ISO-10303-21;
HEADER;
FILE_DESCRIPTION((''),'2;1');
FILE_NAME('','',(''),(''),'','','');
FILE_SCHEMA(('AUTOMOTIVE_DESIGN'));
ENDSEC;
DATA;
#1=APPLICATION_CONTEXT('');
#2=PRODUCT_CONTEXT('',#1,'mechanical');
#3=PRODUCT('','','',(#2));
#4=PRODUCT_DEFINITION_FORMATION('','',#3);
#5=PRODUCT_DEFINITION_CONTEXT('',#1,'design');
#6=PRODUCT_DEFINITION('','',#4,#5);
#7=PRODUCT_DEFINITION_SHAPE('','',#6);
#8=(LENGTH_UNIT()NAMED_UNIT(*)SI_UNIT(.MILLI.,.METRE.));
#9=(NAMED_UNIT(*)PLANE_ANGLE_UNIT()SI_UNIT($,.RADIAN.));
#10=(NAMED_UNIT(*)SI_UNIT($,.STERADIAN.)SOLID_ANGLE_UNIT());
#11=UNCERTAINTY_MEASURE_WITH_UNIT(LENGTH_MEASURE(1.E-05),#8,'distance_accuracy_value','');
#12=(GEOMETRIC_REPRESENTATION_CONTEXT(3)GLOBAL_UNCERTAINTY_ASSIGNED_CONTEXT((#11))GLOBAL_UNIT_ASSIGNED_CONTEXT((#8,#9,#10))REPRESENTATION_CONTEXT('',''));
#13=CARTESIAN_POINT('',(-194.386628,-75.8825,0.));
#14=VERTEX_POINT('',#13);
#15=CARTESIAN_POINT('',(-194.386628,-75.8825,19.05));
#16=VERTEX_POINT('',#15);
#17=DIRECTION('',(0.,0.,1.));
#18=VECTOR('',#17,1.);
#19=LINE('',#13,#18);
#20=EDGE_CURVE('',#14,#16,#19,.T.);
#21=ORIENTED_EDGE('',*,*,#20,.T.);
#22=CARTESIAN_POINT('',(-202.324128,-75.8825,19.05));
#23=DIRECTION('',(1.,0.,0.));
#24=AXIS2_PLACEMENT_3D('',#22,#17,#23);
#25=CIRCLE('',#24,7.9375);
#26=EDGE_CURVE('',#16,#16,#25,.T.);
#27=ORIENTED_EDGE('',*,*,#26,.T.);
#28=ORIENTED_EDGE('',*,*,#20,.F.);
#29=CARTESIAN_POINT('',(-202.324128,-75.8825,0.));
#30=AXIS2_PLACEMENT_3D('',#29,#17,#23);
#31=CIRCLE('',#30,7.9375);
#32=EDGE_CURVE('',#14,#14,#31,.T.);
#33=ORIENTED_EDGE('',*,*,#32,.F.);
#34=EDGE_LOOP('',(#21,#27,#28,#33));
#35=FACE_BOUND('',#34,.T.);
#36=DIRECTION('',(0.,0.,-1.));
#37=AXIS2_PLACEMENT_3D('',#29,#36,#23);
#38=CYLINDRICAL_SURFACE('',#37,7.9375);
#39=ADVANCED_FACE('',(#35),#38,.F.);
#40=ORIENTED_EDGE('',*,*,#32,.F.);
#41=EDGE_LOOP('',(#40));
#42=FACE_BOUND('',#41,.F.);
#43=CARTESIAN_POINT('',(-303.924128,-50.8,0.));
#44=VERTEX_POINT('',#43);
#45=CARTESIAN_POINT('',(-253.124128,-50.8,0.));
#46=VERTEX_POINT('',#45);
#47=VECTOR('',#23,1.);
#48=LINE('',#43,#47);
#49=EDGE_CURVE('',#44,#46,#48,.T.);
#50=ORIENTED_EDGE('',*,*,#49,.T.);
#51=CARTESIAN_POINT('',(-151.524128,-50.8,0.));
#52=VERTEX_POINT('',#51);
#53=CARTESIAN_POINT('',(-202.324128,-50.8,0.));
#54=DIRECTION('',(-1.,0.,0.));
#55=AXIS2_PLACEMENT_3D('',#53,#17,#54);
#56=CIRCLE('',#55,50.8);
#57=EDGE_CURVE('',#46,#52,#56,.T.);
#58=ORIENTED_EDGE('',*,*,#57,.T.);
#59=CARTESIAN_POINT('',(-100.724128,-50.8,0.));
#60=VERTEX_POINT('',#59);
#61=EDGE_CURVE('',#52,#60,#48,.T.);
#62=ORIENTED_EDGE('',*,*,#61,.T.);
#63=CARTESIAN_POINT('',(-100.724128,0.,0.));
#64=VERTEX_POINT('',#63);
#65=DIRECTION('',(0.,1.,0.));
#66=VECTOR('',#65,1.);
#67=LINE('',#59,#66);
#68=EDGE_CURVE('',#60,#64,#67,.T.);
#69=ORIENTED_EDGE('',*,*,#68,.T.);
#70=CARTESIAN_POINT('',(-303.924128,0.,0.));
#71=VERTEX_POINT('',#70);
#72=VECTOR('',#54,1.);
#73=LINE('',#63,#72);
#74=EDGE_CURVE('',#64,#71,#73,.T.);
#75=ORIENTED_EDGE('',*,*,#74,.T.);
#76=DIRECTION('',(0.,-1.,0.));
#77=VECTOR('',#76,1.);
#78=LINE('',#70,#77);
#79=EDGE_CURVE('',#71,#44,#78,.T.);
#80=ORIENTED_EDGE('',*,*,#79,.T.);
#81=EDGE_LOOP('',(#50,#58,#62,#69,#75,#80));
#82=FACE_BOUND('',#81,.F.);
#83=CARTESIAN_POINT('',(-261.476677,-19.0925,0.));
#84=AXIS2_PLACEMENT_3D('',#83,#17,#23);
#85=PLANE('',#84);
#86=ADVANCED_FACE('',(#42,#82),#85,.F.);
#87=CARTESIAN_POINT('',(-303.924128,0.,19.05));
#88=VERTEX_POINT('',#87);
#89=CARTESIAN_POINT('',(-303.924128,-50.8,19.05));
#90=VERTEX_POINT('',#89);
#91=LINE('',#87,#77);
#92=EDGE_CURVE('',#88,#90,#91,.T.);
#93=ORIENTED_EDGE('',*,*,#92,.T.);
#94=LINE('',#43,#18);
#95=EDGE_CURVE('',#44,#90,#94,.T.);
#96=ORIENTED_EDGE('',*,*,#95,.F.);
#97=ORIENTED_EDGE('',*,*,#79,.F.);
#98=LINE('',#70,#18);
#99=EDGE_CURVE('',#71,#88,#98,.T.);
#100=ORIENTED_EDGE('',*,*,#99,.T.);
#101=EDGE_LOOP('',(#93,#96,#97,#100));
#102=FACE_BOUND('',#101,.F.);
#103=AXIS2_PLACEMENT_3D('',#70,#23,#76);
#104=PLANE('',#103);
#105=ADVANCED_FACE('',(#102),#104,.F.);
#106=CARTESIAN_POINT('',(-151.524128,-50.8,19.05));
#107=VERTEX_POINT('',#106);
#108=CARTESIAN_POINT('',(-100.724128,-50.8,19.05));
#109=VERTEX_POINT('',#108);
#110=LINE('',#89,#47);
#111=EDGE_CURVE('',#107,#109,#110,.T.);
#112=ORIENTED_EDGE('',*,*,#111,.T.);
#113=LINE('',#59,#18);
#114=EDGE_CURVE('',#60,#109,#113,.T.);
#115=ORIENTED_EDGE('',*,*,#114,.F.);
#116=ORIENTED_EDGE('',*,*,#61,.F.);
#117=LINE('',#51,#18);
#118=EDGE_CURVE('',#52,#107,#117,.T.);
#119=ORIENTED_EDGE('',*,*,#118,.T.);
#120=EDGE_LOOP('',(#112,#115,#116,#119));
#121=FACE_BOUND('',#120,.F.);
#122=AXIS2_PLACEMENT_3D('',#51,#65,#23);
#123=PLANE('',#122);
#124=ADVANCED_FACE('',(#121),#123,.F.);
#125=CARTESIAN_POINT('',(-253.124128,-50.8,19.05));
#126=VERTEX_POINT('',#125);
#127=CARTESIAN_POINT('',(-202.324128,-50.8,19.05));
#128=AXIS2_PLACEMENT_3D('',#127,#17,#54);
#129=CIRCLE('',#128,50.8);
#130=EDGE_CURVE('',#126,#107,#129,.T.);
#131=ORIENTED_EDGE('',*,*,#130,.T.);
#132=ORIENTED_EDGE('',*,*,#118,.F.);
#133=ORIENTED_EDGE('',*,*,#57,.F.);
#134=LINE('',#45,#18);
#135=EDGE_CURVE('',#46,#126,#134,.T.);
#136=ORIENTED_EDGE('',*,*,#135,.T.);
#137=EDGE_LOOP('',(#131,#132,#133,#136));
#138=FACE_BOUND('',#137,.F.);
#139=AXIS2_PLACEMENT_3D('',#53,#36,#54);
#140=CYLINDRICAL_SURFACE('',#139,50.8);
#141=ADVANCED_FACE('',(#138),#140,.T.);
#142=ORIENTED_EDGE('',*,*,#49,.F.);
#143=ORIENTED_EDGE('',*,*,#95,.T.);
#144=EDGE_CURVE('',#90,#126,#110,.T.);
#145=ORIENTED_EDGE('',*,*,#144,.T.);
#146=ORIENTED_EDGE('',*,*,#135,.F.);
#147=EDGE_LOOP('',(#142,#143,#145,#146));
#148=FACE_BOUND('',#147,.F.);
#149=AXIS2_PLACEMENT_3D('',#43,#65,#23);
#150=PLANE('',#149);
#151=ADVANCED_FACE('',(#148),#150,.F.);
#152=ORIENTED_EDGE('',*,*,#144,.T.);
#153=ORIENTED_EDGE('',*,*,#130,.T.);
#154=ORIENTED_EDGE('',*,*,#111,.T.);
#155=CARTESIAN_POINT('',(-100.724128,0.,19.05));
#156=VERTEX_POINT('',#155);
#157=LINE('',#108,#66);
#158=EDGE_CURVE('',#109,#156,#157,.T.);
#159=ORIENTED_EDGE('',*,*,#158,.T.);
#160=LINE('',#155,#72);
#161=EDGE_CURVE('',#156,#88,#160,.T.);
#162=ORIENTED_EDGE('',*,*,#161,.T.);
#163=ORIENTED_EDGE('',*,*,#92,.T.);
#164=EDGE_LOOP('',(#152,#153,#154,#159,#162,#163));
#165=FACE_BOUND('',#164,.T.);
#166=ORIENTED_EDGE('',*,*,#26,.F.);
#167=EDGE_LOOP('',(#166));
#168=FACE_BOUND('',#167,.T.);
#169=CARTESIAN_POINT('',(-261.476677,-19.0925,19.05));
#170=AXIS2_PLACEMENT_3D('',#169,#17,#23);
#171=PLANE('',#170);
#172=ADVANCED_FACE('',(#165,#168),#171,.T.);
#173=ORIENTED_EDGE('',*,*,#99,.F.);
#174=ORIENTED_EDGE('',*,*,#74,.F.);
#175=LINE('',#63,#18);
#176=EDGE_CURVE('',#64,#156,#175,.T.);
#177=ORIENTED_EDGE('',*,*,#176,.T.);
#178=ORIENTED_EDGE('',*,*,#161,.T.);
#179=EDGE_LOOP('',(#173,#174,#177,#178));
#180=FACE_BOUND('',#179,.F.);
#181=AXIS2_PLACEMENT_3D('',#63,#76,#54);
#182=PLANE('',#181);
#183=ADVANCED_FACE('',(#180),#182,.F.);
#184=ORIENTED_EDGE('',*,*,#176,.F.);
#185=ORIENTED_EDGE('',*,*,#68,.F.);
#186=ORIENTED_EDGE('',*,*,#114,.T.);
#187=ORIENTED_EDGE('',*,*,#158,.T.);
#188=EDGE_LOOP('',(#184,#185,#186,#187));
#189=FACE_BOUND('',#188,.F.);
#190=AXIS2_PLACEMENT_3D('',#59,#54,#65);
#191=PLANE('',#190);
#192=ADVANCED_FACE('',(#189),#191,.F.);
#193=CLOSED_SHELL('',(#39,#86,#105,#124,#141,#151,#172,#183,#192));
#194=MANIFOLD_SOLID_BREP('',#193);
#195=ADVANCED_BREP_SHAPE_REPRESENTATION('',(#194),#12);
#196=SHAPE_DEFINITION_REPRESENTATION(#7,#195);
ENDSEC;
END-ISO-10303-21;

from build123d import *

# Parameters (mm, degrees)
F0_R     = 7.9375
F1_DEPTH = 19.05


# Not quite as in the source:
# - a feature of the source that left no trace in its solid (it failed there, or was rolled back) is left out


with BuildPart() as f1:
    # F0 (on Top) → F1 (new body)
    with BuildSketch(Plane.XY):
        with BuildLine():
            ThreePointArc((-253.1241280528, -50.8), (-238.245152537, -14.8789755157), (-202.3241280528, 0))
            Line((-202.3241280528, 0), (-303.9241280528, 0))
            Line((-303.9241280528, 0), (-303.9241280528, -50.8))
            Line((-303.9241280528, -50.8), (-253.1241280528, -50.8))
        make_face()
        with BuildLine():
            ThreePointArc((-151.5241280528, -50.8), (-166.4031035685, -14.8789755157), (-202.3241280528, 0))
            ThreePointArc((-202.3241280528, 0), (-238.245152537, -14.8789755157), (-253.1241280528, -50.8))
            Line((-253.1241280528, -50.8), (-151.5241280528, -50.8))
        make_face()
        with BuildLine():
            Line((-100.7241280528, -50.8), (-100.7241280528, 0))
            Line((-100.7241280528, 0), (-202.3241280528, 0))
            ThreePointArc((-202.3241280528, 0), (-166.4031035685, -14.8789755157), (-151.5241280528, -50.8))
            Line((-151.5241280528, -50.8), (-100.7241280528, -50.8))
        make_face()
        with BuildLine():
            ThreePointArc((-253.1241280528, -50.8), (-202.3241280528, -101.6), (-151.5241280528, -50.8))
            Line((-151.5241280528, -50.8), (-253.1241280528, -50.8))
        make_face()
        with Locations((-202.3241280528, -75.8825)):
            Circle(F0_R, mode=Mode.SUBTRACT)
    extrude(amount=F1_DEPTH)


solid = f1.part
